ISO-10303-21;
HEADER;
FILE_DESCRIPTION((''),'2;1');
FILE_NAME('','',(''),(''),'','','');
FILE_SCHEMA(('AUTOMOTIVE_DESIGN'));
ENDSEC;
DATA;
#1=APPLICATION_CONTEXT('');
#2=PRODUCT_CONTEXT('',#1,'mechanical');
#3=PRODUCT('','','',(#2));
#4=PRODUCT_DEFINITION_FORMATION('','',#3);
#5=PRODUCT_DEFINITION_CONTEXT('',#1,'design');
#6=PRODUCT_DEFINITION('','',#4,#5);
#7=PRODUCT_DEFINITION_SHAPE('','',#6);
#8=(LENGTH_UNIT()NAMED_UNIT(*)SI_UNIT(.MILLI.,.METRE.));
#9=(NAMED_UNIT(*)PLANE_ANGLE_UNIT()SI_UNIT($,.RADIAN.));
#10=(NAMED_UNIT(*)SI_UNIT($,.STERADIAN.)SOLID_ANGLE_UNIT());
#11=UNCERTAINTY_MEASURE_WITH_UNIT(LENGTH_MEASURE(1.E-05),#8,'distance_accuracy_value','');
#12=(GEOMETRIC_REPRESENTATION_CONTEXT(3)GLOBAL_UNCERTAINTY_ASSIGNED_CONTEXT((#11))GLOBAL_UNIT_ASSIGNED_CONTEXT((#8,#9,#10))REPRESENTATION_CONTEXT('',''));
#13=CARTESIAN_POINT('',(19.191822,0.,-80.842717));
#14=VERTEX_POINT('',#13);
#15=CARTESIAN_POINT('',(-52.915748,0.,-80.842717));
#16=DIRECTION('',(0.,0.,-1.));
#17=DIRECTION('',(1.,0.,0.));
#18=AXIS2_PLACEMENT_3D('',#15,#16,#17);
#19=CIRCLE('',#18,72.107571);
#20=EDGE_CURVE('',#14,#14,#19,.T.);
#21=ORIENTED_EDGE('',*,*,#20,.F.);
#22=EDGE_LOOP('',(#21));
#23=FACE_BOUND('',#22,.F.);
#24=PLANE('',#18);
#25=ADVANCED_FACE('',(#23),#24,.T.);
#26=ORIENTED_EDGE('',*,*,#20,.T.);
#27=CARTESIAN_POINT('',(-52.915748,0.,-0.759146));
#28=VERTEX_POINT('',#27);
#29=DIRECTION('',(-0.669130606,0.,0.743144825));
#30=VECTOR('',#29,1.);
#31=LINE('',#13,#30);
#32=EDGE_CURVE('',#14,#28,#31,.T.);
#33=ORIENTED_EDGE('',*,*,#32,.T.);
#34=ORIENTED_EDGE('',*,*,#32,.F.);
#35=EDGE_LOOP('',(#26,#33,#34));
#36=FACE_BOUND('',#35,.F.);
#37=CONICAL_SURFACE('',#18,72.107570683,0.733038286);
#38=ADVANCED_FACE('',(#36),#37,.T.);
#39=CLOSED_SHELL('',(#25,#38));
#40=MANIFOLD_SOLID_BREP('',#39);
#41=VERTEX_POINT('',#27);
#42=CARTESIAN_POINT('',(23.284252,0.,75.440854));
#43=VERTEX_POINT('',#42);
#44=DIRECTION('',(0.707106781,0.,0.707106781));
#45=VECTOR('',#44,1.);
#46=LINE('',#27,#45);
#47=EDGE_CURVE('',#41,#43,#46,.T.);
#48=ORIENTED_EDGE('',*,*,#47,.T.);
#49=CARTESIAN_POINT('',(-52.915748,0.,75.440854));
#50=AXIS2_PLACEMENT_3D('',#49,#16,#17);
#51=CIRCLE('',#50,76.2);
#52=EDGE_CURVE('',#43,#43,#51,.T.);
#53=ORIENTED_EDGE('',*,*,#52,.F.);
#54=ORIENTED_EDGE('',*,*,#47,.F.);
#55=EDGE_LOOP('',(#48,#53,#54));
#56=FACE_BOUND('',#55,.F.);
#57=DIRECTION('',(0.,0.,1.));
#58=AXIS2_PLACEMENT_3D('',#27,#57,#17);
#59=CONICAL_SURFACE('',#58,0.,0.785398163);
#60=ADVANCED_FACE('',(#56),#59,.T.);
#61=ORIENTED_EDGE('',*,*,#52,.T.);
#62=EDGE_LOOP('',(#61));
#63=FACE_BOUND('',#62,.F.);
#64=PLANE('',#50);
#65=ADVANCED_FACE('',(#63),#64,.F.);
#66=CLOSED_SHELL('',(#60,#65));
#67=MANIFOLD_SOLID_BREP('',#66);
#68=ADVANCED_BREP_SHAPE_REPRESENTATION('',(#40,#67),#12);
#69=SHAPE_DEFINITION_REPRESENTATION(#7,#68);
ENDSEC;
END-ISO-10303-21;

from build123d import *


# Not quite as in the source:
# - the program builds the solid bodies; features that only make, move or delete a surface that nothing else refers to are left out


with BuildPart() as f1:
    # F0 (on Front) → F1 (revolve)
    with BuildSketch(Plane.XZ):
        Polygon((-52.9157482088, -0.7591461658), (23.2842517912, 75.4408538342), (-52.9157482088, 75.4408538342), align=None)
    revolve(axis=Axis((-52.9157482088, 0, -2.7009313729), (0, 0, -1)))


with BuildPart() as f1b:
    # F0 (on Front) → F1, piece 2 (revolve)
    with BuildSketch(Plane.XZ):
        Polygon((19.1918224738, -80.8427165799), (-52.9157482088, -0.7591461658), (-52.9157482088, -80.8427165799), align=None)
    revolve(axis=Axis((-52.9157482088, 0, -2.7009313729), (0, 0, -1)))


solid = Compound([f1.part, f1b.part])
